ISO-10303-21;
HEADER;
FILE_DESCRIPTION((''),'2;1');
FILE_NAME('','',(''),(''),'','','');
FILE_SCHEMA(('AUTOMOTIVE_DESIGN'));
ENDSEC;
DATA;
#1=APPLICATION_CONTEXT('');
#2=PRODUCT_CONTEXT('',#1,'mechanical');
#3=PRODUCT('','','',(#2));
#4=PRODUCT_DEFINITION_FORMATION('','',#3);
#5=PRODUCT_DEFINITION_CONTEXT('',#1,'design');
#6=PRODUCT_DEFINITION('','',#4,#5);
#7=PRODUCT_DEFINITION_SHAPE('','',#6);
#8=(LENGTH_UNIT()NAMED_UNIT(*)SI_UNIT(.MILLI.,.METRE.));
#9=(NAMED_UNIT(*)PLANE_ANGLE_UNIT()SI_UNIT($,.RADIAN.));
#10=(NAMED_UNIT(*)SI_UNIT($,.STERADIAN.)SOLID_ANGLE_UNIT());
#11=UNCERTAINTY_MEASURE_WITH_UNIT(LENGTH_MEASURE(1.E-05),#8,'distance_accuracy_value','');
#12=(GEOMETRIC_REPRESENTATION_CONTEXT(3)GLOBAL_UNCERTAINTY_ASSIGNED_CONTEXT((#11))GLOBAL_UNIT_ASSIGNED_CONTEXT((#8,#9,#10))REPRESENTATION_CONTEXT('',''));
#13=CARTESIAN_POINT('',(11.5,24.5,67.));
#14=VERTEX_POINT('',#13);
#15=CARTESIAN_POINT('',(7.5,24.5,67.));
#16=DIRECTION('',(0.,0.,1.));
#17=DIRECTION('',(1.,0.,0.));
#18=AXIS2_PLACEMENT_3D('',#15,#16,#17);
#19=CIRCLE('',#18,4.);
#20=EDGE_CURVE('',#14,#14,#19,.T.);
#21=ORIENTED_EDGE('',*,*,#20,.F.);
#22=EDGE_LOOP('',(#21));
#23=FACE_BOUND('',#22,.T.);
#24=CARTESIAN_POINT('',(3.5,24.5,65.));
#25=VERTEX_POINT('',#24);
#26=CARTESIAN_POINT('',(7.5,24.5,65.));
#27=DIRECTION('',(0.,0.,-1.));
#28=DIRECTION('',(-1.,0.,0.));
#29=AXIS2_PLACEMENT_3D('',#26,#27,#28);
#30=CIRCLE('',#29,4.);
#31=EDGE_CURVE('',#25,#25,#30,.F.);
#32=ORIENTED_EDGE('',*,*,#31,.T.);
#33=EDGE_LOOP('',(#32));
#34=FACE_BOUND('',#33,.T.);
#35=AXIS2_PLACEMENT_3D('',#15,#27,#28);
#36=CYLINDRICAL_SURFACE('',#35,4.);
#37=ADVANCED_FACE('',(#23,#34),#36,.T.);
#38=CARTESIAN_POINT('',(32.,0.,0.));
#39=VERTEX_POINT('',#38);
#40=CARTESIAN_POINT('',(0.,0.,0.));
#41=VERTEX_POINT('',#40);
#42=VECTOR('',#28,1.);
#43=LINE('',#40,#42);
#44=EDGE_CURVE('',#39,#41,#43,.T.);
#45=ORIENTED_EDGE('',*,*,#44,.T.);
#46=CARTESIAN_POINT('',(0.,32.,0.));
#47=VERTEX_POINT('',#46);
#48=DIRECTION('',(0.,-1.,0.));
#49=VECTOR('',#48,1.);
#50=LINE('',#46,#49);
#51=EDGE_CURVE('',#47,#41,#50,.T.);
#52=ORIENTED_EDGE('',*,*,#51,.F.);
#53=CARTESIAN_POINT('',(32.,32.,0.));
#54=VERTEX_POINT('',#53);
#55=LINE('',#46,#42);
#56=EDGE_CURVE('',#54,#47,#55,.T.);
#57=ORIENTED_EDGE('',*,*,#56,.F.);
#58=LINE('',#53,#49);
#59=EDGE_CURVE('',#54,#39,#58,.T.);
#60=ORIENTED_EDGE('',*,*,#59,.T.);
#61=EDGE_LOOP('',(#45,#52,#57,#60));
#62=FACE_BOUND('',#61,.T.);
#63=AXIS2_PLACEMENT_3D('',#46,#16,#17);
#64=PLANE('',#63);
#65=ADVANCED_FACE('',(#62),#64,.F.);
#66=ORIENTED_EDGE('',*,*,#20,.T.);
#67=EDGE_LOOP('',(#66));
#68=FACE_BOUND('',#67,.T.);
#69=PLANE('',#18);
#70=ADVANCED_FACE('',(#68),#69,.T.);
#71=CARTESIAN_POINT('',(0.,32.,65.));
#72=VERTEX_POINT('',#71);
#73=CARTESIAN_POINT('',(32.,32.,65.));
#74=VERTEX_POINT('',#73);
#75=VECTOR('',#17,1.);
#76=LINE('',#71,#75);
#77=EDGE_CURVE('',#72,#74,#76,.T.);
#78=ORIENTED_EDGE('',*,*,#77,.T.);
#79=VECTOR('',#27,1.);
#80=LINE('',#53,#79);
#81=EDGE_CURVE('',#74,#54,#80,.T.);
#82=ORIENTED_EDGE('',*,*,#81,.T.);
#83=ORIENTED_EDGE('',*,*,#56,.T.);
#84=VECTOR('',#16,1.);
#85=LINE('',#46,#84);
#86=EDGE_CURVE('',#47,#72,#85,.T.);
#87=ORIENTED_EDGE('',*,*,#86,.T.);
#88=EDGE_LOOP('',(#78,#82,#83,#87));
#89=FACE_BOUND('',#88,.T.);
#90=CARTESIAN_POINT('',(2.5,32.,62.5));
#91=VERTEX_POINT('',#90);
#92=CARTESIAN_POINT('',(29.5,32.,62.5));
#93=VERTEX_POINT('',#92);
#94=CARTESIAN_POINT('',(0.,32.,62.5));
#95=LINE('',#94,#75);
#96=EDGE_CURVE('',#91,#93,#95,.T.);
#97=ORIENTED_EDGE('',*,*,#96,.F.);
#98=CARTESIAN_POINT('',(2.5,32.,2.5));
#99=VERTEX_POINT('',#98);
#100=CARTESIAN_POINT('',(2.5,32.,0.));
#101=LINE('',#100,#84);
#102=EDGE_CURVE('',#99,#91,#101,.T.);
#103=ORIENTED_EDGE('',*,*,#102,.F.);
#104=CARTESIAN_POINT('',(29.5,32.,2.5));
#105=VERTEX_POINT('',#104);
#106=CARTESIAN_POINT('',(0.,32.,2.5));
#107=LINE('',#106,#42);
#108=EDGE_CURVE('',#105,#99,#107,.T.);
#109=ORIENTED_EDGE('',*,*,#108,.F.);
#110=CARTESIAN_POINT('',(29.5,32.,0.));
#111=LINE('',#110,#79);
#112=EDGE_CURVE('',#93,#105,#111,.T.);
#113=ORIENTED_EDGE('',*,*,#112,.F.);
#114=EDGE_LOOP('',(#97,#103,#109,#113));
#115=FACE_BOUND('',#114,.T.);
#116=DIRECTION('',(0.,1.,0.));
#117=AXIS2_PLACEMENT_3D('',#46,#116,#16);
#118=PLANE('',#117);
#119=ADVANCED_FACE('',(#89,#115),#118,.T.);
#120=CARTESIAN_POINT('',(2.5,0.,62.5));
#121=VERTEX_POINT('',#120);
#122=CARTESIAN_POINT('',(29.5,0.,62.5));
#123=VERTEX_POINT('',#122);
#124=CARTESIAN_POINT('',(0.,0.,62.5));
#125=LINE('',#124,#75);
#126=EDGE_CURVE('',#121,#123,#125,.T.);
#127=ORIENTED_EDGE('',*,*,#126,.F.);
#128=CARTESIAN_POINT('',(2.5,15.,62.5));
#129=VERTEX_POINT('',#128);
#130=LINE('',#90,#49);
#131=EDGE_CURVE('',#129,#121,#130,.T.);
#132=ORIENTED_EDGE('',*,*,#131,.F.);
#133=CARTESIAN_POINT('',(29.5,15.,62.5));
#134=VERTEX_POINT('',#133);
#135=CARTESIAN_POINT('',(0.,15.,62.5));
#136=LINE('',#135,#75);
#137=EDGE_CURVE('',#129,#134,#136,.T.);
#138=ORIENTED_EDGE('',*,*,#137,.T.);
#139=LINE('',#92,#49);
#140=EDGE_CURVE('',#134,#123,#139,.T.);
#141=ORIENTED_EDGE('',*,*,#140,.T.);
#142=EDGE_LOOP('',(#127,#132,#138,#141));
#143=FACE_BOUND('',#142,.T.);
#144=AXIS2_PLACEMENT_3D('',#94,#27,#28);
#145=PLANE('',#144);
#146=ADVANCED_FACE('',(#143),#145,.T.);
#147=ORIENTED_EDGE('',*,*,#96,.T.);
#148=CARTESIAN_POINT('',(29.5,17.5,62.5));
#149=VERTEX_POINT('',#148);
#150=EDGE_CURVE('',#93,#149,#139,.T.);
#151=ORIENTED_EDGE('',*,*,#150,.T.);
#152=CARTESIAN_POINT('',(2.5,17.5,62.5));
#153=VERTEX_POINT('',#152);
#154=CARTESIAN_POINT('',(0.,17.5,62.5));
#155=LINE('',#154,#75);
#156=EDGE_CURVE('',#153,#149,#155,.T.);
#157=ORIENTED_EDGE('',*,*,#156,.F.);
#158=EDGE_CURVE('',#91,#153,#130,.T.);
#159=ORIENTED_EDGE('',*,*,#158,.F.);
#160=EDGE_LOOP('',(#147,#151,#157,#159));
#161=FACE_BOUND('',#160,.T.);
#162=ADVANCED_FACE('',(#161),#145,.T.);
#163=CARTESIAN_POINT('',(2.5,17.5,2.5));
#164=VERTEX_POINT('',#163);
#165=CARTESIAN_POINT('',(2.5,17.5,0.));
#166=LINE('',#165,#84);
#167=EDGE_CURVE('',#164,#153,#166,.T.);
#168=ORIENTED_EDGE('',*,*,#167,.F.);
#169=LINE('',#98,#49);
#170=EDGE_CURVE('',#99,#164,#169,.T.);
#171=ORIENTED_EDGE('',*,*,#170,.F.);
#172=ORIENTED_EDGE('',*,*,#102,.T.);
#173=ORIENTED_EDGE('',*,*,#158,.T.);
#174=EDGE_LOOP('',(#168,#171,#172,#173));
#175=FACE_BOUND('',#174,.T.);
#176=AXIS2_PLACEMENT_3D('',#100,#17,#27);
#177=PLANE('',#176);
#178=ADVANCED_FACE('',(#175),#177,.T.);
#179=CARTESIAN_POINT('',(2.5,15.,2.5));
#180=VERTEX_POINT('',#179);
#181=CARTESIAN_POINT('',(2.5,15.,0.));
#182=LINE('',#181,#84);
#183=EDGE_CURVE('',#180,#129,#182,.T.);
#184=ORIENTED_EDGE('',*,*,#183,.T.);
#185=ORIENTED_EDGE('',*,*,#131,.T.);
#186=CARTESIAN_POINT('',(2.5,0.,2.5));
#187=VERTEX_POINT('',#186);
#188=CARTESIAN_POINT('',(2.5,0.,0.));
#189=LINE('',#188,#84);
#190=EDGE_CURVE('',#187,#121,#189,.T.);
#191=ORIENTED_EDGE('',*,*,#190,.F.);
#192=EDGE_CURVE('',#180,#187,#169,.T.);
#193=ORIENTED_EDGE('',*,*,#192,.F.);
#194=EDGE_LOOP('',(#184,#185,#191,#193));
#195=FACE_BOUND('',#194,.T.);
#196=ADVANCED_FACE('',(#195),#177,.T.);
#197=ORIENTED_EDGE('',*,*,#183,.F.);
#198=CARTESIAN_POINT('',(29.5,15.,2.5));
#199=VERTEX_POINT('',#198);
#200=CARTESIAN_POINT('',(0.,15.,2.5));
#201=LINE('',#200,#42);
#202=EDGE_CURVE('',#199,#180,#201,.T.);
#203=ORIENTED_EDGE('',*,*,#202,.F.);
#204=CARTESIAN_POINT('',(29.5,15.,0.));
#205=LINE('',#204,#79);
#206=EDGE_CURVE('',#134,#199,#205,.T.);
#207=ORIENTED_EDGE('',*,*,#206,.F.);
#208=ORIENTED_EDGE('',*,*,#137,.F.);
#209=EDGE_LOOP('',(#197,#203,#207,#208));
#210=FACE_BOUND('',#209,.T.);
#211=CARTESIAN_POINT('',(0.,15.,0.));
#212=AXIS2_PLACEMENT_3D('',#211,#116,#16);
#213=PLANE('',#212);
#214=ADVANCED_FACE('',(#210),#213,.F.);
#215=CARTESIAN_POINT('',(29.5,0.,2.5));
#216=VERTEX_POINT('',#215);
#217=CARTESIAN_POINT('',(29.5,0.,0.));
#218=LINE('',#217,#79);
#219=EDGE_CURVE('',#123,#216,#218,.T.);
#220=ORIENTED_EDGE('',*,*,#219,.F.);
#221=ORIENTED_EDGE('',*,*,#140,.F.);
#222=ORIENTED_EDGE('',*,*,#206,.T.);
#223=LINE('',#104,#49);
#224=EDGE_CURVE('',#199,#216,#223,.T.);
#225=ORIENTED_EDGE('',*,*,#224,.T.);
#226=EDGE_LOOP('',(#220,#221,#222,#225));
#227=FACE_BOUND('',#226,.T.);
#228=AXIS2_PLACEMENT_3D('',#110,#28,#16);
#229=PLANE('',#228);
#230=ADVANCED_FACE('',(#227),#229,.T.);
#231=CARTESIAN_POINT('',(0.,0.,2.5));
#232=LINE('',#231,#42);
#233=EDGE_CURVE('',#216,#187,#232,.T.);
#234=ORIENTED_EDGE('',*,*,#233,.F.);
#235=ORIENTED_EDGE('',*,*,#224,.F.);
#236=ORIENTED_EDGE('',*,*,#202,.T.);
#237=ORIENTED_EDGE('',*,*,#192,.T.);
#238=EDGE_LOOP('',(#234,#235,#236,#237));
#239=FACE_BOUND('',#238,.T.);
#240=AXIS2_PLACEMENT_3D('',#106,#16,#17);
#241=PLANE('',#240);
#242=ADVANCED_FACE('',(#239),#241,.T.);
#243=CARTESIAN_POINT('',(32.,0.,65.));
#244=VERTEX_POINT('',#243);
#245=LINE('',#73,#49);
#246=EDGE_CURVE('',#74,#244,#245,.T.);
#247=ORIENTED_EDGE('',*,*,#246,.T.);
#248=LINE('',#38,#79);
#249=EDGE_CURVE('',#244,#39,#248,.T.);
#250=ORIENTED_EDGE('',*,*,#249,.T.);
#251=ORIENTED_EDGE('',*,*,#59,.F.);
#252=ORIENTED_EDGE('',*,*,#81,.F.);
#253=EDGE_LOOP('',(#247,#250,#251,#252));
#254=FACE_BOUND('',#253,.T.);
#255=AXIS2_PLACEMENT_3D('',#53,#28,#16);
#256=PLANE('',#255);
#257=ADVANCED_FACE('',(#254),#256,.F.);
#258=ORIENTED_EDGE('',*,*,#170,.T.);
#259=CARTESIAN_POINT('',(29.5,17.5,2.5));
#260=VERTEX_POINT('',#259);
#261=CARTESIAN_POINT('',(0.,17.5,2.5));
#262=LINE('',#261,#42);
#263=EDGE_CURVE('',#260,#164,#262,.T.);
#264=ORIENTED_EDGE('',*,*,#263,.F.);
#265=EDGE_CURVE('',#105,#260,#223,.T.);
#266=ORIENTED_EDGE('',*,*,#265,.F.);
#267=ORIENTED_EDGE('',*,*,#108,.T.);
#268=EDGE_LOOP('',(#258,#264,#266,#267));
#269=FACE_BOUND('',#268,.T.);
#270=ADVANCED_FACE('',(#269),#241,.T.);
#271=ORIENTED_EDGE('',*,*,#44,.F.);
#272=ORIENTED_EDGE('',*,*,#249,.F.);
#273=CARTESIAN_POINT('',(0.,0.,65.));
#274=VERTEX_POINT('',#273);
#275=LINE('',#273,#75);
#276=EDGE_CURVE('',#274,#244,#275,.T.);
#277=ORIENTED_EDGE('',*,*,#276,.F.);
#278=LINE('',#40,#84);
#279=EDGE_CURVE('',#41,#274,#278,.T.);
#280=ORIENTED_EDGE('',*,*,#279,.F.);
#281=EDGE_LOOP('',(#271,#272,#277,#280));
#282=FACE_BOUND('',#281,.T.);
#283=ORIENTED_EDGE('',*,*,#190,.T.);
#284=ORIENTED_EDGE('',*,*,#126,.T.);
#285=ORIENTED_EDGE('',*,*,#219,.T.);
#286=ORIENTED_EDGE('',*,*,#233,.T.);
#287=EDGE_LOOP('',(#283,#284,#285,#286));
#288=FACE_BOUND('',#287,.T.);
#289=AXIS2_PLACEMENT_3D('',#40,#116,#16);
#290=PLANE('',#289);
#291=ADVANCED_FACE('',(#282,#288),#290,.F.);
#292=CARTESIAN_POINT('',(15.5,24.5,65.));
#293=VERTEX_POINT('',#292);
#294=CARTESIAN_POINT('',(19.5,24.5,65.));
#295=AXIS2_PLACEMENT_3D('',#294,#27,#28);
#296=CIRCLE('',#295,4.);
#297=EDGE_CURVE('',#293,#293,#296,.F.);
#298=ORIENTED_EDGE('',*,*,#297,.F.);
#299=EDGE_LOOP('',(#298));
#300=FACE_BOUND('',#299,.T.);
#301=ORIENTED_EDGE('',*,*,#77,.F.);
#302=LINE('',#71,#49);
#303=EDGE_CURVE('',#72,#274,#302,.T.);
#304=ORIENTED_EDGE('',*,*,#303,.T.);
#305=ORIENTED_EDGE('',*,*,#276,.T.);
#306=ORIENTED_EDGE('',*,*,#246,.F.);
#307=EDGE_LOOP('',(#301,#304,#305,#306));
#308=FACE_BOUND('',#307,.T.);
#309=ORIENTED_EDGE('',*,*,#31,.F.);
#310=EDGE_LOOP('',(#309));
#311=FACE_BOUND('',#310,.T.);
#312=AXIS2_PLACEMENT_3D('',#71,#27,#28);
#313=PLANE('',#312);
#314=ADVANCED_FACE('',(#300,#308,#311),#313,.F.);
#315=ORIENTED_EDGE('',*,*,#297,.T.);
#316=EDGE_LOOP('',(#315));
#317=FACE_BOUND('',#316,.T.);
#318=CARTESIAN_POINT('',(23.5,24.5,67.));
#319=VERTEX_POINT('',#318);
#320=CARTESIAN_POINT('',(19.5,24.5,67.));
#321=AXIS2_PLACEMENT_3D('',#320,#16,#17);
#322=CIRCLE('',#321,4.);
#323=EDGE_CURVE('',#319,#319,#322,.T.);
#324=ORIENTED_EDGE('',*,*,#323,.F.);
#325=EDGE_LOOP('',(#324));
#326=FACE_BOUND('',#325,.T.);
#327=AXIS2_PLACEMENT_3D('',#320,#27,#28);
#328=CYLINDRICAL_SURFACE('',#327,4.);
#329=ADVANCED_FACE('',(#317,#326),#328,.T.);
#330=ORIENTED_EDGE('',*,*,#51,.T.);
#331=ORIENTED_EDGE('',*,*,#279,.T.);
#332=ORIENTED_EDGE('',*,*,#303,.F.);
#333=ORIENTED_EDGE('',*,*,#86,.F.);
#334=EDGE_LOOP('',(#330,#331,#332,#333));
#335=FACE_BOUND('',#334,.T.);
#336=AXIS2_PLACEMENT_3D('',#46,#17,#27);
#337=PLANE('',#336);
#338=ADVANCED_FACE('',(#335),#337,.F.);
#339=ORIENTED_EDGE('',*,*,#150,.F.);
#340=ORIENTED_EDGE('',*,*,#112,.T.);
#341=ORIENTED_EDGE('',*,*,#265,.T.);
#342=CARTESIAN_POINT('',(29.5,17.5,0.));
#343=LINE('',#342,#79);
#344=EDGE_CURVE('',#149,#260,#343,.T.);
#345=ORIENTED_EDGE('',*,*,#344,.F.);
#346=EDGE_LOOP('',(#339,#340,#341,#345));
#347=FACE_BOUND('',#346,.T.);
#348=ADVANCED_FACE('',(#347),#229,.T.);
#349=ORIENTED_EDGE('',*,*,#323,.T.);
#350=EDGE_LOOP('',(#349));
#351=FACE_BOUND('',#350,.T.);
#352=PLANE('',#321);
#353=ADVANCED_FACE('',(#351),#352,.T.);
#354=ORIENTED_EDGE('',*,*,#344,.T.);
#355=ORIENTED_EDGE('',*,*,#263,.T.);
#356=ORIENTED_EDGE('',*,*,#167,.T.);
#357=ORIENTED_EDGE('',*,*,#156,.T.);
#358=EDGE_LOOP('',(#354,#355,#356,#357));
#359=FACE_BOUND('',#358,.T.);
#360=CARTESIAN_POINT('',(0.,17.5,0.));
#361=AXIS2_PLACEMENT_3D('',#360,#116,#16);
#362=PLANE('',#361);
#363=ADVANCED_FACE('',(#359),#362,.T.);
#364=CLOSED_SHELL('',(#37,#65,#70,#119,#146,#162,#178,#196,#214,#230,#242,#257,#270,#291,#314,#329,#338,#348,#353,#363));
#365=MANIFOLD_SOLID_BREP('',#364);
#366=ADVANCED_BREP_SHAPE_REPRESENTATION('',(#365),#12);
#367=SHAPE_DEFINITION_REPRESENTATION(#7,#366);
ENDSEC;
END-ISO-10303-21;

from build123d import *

# Parameters (mm, degrees)
SKETCH1_W                 = 32
SKETCH1_H                 = 65
BOSS_EXTRUDE1_DEPTH       = 32
SHELL1_T                  = -2.5
SHELL1_THICKNESS_2_FACE_W = 60
SHELL1_THICKNESS_2_FACE_H = 27
SHELL1_THICKNESS_2_DEPTH  = 15
SHELL2_START              = 2.5
SHELL2_OUTLINE_W          = 15
SHELL2_OUTLINE_H          = 60
SHELL2_DEPTH              = 27
SKETCH2_R                 = 4
BOSS_EXTRUDE2_DEPTH       = 2


# Read off the part's stored shape, not the designer's step: Shell2
with BuildPart() as part:
    # Sketch1 → Boss-Extrude1 (new body)
    with BuildSketch(Plane(origin=(0, 0, 0), x_dir=(1, 0, 0), z_dir=(0, 1, 0))):
        with Locations((16, -32.5)):
            Rectangle(SKETCH1_W, SKETCH1_H)
    extrude(amount=BOSS_EXTRUDE1_DEPTH)

    # Shell1
    shell1_openings = [part.faces().sort_by_distance(p)[0] for p in [
        (16, 32, 32.5),
    ]]
    offset(amount=SHELL1_T, openings=shell1_openings, kind=Kind.INTERSECTION)

    # Shell1 thickness 2 face (on inner face of the shell) → Shell1 thickness 2 (add)
    with BuildSketch(Plane(origin=(16, 2.5, 32.5), x_dir=(0, 0, -1), z_dir=(0, -1, 0))):
        Rectangle(SHELL1_THICKNESS_2_FACE_W, SHELL1_THICKNESS_2_FACE_H)
    extrude(amount=-SHELL1_THICKNESS_2_DEPTH)

    # Shell2 outline → Shell2 (cut)
    with BuildSketch(Plane.YZ.offset(SHELL2_START)):
        with Locations((7.5, 32.5)):
            Rectangle(SHELL2_OUTLINE_W, SHELL2_OUTLINE_H)
    extrude(amount=SHELL2_DEPTH, mode=Mode.SUBTRACT)

    # Sketch2 → Boss-Extrude2 (add)
    with BuildSketch(Plane.XY.offset(65)):
        with Locations(Location((7.5, 24.5, 0), (0, 0, 180))):
            Circle(SKETCH2_R)
        with Locations(Location((19.5, 24.5, 0), (0, 0, 180))):
            Circle(SKETCH2_R)
    extrude(amount=BOSS_EXTRUDE2_DEPTH)


solid = part.part
